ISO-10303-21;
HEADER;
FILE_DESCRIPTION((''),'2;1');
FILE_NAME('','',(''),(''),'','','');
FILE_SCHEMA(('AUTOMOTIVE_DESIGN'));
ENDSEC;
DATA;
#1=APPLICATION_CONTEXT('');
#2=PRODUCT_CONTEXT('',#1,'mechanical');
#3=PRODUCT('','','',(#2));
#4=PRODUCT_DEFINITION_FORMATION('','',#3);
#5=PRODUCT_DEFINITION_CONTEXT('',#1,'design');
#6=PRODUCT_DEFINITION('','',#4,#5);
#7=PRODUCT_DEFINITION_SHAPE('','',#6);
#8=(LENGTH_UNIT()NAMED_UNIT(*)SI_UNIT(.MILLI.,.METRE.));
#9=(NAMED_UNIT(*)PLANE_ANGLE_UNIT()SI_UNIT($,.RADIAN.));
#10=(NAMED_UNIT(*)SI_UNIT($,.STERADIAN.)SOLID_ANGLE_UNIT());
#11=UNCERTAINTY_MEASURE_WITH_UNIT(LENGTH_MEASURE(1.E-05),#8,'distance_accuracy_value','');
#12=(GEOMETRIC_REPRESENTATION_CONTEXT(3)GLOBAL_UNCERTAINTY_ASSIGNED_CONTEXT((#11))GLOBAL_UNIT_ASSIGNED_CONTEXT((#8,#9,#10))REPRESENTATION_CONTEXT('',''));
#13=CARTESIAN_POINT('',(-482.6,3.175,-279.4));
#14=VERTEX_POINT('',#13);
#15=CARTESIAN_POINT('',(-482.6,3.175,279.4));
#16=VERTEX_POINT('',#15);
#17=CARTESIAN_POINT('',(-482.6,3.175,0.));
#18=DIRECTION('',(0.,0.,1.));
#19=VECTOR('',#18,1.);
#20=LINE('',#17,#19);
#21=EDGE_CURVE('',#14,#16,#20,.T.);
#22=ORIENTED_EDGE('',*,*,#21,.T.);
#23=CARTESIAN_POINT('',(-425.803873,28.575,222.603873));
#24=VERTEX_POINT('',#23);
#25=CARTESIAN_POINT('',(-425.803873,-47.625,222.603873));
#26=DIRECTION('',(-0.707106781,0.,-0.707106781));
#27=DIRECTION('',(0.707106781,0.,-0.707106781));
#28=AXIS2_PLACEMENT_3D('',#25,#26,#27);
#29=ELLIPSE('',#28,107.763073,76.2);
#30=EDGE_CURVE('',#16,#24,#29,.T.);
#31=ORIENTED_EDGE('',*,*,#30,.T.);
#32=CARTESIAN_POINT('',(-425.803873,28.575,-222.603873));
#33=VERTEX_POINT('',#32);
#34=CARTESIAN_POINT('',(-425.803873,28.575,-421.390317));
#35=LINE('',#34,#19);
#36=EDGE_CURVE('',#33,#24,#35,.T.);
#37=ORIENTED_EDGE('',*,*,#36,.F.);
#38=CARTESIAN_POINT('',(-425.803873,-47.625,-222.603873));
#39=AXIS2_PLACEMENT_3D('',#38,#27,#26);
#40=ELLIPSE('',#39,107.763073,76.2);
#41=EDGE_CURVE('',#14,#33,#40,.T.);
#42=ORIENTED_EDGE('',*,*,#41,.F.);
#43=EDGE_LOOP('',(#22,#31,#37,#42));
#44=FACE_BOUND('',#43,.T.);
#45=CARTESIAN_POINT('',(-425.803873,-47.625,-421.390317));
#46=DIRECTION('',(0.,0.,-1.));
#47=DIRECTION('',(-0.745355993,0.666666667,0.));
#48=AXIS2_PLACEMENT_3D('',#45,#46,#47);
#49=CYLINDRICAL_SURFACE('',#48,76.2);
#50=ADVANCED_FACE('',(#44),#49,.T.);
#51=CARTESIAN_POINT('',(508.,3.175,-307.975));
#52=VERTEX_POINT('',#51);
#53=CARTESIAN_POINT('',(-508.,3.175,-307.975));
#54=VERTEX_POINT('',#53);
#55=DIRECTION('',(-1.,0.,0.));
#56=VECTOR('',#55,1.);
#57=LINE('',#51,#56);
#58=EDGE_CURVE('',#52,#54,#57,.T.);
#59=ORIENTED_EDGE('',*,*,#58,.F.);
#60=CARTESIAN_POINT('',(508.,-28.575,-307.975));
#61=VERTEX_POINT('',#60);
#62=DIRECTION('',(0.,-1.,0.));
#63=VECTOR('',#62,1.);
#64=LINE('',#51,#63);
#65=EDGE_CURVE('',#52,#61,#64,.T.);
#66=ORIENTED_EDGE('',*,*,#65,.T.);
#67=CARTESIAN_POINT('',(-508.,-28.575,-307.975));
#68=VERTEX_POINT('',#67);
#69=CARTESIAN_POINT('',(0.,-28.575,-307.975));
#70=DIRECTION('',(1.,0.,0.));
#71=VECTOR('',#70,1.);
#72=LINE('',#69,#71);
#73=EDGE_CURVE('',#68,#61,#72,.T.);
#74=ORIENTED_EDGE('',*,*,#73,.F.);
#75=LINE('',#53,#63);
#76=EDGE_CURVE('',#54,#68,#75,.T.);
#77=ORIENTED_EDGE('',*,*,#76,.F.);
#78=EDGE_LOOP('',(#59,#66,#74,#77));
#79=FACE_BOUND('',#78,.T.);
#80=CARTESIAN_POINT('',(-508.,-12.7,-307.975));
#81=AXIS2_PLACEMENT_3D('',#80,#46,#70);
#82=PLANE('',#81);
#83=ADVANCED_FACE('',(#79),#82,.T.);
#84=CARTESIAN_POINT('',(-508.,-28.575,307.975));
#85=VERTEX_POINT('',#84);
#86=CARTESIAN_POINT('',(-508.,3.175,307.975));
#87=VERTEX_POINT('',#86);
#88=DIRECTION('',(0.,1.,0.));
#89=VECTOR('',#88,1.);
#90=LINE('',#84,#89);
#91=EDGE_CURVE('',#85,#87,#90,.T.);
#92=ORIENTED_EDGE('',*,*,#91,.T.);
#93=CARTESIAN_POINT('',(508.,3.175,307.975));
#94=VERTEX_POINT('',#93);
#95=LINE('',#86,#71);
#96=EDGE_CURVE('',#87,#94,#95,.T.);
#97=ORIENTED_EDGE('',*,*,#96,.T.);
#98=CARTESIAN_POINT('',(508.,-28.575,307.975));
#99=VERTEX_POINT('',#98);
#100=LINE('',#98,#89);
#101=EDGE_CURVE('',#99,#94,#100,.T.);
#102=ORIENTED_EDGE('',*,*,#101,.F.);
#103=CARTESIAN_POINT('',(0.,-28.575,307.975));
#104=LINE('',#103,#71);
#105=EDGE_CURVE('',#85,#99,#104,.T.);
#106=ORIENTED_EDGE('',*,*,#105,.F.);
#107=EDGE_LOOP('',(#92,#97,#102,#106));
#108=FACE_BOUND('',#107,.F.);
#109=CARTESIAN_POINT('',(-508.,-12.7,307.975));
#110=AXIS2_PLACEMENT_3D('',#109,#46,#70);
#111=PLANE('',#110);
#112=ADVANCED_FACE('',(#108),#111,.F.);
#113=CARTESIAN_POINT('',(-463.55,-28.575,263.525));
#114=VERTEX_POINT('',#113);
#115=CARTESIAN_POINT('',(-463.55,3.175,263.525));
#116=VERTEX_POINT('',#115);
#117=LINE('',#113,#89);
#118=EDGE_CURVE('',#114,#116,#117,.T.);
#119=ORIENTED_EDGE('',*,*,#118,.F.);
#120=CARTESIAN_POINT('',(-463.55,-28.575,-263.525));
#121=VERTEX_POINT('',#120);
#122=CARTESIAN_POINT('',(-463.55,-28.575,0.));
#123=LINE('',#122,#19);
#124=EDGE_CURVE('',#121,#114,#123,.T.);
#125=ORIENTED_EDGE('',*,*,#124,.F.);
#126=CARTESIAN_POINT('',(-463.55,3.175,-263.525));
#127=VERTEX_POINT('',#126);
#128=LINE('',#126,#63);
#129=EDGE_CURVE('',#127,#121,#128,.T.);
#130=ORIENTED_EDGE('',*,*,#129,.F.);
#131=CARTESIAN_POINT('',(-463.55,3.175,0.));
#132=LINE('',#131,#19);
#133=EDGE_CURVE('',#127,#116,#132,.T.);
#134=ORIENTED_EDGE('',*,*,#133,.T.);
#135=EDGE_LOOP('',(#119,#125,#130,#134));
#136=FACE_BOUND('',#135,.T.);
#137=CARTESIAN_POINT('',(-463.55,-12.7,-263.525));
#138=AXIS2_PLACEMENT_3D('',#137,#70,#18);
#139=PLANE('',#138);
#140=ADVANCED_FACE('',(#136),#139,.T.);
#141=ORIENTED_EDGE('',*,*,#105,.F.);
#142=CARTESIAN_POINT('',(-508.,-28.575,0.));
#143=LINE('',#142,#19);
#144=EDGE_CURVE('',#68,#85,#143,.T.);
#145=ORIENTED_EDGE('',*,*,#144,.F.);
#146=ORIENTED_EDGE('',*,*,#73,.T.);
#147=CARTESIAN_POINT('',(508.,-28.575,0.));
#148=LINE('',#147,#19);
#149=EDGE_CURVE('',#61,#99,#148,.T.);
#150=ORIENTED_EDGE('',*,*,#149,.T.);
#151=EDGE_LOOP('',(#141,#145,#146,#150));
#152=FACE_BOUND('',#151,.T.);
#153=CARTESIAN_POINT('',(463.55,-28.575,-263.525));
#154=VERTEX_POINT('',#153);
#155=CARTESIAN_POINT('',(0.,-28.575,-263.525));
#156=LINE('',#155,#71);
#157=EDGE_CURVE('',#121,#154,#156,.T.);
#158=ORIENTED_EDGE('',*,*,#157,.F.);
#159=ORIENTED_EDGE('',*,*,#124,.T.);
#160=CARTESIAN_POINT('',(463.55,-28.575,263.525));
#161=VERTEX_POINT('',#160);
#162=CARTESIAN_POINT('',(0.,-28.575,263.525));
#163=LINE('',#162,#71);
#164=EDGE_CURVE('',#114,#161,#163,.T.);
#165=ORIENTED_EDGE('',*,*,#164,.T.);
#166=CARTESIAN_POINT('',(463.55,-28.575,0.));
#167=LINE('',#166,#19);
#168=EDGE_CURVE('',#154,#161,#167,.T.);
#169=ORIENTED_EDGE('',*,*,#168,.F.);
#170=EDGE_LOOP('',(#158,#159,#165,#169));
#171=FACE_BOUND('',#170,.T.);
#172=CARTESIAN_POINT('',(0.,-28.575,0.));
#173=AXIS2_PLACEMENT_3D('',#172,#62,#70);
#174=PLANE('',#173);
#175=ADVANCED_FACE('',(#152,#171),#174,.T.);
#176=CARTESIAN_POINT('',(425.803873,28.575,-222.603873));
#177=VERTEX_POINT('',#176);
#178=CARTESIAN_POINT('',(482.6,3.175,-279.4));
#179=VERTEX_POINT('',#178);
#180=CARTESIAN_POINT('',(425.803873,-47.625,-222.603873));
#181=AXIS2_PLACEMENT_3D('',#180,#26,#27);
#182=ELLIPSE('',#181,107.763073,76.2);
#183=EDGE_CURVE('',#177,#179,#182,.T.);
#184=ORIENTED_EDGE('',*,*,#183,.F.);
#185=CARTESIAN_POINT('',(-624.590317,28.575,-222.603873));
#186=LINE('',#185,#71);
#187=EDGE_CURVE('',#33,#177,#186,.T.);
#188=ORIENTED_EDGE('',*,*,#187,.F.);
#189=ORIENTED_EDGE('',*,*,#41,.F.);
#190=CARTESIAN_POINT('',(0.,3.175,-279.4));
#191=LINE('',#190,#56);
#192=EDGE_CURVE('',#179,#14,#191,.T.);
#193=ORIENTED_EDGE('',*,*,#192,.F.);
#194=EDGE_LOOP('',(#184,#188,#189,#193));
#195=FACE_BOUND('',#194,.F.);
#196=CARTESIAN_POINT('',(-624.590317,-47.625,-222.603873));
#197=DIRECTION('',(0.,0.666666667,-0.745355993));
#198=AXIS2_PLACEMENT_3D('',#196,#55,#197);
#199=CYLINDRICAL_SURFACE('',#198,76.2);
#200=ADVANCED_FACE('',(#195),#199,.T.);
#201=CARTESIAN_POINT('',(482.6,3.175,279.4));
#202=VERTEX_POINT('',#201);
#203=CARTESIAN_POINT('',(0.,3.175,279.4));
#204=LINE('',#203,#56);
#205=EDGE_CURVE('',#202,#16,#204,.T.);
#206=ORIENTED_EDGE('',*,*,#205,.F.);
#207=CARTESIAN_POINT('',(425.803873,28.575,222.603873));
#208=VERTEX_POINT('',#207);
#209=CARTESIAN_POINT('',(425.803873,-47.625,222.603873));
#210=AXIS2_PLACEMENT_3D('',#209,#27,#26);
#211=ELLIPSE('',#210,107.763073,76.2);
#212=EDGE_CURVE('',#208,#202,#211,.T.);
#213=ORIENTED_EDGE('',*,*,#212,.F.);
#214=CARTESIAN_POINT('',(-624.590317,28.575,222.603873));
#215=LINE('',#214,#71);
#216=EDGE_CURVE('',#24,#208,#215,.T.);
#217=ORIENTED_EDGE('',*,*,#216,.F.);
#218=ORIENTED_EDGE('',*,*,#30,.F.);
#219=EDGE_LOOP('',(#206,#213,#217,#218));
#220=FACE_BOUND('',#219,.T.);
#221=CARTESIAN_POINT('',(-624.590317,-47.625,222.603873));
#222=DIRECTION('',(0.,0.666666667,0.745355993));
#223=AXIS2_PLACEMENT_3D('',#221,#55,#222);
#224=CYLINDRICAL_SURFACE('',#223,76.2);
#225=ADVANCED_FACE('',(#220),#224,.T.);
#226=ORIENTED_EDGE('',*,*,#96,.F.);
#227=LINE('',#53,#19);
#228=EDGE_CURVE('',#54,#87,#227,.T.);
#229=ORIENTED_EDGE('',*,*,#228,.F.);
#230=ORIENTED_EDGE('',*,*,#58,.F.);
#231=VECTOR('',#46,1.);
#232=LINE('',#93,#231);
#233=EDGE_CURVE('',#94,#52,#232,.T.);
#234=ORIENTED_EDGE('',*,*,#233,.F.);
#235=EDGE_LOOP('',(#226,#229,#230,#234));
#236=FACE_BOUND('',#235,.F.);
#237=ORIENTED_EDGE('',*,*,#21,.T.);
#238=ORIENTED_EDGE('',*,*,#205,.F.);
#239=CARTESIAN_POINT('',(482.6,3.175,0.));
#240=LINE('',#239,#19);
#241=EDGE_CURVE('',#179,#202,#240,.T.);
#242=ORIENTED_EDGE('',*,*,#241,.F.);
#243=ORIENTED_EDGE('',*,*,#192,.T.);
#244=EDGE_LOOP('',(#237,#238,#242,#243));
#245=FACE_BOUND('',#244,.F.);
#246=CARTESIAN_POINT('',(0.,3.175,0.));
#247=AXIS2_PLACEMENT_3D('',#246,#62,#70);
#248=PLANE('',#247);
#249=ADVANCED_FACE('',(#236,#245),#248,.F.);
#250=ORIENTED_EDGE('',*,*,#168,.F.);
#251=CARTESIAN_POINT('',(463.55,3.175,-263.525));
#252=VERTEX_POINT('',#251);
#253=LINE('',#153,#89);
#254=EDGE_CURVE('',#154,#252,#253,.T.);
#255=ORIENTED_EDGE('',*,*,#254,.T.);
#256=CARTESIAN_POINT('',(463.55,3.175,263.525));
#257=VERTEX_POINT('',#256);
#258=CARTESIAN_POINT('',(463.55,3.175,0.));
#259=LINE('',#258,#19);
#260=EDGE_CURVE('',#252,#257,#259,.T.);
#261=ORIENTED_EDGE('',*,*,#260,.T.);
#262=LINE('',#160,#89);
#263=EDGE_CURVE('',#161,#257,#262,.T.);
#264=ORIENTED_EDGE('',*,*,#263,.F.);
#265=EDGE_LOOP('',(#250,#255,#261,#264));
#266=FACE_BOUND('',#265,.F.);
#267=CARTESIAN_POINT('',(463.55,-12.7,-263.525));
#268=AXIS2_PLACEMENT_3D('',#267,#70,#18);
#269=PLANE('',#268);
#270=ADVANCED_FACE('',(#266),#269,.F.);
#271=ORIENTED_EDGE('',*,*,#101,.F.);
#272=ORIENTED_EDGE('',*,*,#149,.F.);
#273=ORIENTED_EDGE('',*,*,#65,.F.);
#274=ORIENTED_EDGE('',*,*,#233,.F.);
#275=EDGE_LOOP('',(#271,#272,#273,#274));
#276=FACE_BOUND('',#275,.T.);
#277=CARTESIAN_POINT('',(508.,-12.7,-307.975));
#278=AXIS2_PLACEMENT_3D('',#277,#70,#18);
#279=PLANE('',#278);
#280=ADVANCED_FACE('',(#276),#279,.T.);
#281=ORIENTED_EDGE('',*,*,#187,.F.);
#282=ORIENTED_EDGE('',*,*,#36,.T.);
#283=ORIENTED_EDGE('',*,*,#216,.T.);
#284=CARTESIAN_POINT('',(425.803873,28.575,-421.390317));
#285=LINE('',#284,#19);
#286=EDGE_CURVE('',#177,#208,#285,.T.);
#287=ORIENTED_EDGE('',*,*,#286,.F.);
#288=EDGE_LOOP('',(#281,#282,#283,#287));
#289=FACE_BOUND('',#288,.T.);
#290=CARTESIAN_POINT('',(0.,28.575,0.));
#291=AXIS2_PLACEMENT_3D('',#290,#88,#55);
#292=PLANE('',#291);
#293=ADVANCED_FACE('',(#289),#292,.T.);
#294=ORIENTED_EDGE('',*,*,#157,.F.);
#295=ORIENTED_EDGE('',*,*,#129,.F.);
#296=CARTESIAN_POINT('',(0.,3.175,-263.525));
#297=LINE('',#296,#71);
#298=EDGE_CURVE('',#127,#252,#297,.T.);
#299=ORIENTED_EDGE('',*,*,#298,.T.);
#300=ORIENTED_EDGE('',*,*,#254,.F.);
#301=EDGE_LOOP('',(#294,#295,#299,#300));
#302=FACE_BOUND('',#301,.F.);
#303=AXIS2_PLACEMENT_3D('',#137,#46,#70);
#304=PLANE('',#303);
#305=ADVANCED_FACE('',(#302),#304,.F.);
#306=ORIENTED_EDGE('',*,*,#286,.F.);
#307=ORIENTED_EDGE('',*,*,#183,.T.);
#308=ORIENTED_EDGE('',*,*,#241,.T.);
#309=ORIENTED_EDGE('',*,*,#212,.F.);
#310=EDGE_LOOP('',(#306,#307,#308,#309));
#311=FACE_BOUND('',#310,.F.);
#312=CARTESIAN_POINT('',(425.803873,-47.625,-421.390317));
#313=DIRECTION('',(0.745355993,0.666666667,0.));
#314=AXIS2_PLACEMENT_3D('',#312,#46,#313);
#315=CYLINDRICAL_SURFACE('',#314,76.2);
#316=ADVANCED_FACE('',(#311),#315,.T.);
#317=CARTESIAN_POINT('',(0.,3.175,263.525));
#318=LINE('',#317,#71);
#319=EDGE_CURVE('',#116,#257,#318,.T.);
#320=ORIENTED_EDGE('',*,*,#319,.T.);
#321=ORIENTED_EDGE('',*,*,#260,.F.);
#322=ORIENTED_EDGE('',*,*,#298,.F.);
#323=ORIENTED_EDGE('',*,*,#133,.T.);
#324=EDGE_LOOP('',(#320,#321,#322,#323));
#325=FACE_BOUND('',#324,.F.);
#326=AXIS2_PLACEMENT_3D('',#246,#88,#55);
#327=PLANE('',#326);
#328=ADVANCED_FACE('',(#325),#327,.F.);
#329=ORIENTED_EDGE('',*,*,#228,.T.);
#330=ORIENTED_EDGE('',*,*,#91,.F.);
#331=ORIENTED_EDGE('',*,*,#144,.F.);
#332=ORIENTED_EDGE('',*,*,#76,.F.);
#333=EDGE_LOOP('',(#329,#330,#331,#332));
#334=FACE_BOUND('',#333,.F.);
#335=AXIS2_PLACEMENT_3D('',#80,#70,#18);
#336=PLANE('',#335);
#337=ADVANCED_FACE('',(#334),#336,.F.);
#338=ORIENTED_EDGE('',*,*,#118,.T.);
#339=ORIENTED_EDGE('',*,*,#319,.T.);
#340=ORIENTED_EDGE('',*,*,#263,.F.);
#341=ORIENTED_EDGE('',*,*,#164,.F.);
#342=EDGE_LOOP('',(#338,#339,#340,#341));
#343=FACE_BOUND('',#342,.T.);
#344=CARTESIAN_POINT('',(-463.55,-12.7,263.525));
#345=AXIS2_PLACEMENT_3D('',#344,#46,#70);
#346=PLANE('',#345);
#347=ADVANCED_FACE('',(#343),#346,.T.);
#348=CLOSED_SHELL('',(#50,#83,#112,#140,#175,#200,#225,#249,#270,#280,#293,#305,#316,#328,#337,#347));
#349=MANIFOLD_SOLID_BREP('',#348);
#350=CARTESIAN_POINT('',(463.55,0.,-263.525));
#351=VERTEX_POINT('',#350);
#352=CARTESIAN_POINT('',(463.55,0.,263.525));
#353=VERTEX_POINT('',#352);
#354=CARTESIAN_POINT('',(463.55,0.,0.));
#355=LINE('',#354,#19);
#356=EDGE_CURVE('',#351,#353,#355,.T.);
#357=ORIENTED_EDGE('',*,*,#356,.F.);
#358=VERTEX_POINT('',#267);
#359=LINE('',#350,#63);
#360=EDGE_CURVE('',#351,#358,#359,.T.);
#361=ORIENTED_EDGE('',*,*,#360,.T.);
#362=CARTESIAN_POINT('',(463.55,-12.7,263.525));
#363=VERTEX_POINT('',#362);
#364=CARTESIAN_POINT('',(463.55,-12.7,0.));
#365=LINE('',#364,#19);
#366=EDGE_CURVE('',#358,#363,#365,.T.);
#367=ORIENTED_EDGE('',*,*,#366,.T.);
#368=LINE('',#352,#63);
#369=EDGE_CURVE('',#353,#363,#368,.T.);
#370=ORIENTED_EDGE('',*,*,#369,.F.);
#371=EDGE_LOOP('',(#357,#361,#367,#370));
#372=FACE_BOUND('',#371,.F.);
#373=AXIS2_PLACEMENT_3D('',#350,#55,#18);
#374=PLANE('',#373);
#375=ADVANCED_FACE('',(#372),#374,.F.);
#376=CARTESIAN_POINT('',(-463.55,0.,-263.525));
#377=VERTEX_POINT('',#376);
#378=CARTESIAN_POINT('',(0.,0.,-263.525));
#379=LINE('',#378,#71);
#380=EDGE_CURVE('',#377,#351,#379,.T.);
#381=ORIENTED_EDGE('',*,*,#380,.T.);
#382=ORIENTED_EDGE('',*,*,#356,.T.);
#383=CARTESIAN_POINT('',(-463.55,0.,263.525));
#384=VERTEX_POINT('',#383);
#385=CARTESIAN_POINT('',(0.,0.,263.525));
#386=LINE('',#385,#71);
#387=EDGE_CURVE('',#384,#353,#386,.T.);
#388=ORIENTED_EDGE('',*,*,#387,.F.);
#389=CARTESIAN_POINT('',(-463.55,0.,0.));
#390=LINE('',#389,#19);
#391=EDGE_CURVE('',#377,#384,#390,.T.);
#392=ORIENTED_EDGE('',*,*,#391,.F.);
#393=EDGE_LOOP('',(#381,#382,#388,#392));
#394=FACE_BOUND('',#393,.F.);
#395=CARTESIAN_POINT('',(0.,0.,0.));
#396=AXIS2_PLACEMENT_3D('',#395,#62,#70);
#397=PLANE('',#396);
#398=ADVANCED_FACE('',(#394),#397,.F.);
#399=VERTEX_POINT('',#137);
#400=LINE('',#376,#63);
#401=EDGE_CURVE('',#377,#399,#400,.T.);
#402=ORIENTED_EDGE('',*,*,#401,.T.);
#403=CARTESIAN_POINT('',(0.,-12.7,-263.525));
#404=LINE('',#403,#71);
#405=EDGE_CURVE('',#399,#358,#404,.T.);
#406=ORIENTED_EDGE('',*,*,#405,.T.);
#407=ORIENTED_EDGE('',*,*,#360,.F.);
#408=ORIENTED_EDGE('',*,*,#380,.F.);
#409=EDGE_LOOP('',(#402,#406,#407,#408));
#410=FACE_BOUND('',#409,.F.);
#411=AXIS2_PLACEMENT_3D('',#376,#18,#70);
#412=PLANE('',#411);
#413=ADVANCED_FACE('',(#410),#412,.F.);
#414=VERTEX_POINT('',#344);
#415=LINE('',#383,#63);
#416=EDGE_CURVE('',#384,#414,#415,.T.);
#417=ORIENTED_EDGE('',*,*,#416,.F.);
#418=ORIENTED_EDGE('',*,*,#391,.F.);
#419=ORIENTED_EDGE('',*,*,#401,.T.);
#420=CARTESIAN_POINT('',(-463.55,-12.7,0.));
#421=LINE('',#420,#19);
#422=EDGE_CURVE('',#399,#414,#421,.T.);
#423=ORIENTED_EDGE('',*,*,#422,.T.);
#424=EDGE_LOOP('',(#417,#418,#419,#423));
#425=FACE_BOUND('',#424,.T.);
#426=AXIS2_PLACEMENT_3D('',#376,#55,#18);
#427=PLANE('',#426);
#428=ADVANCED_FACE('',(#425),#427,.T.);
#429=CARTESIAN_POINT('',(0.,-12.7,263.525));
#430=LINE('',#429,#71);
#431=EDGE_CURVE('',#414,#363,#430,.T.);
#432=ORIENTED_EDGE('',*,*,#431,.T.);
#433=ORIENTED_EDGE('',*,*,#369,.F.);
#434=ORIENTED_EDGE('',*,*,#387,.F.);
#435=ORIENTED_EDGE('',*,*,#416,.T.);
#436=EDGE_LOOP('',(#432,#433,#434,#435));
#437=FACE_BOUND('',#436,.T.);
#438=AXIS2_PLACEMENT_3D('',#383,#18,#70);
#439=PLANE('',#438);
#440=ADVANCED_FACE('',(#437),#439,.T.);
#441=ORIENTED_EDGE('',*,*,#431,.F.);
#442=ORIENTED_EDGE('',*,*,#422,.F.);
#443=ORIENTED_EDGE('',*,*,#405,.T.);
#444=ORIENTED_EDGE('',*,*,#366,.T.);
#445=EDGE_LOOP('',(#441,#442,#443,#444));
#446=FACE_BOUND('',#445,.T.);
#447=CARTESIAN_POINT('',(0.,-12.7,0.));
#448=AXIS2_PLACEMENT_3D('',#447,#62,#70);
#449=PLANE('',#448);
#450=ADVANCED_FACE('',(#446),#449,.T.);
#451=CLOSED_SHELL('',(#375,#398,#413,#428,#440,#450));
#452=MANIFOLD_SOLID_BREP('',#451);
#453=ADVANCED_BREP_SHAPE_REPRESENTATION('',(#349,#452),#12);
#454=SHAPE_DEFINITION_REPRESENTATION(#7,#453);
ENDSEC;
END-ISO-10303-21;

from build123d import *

# Parameters (mm, degrees)
F0_W        = 927.1
F0_H        = 527.05
F1_DEPTH    = 12.7
F2_W        = 1016
F2_H        = 615.95
F2_W_2      = 927.1
F2_H_2      = 527.05
F3_DEPTH    = 15.875
F4_W        = 965.2
F4_H        = 558.8
F5_DEPTH    = 25.4
F6_T1_DEPTH = 842.7806331425
F6_T3_DEPTH = 1249.1806331425


# Not quite as in the source:
# - a fillet or chamfer that OpenCascade refuses, or shapes differently, is made with other operations: its cross-section is extruded or revolved along the edge and cut away or added


with BuildPart() as f1:
    # F0 (on Front) → F1 (new body)
    with BuildSketch(Plane.XZ):
        Rectangle(F0_W, F0_H)
    extrude(amount=F1_DEPTH)


with BuildPart() as f3:
    # F2 (on face) → F3 (new body, symmetric)
    with BuildSketch(Plane.XZ.offset(12.7)):
        Rectangle(F2_W, F2_H)
        Rectangle(F2_W_2, F2_H_2, mode=Mode.SUBTRACT)
    extrude(amount=F3_DEPTH, both=True)

    # F4 (on face) → F5 (join)
    with BuildSketch(Plane(origin=(0, 3.175, 0), x_dir=(-1, 0, 0), z_dir=(0, 1, 0))):
        Rectangle(F4_W, F4_H)
    extrude(amount=F5_DEPTH)

    # F6: fillet of radius 76.2 on 4 edges, made by hand

    # F6_s2 → F6_t1 (cut)
    with BuildSketch(Plane.XY.offset(-421.3903165712)):
        with BuildLine():
            ThreePointArc((482.6, 3.175), (456.9123931049, 21.9357648032), (425.8038733715, 28.575))
            Line((425.8038733715, 28.575), (425.8038733715, 30.099))
            Line((425.8038733715, 30.099), (482.6, 30.099))
            Line((482.6, 30.099), (484.124, 28.575))
            ThreePointArc((484.124, 28.575), (484.124, 15.875), (483.7359225326, 4.191))
            Line((483.7359225326, 4.191), (482.6, 3.175))
        make_face()
        with BuildLine():
            ThreePointArc((-482.6, 3.175), (-456.9123931049, 21.9357648032), (-425.8038733715, 28.575))
            Line((-425.8038733715, 28.575), (-425.8038733715, 30.099))
            Line((-425.8038733715, 30.099), (-482.6, 30.099))
            Line((-482.6, 30.099), (-484.124, 28.575))
            ThreePointArc((-484.124, 28.575), (-484.124, 15.875), (-483.7359225326, 4.191))
            Line((-483.7359225326, 4.191), (-482.6, 3.175))
        make_face()
    extrude(amount=F6_T1_DEPTH, mode=Mode.SUBTRACT)

    # F6_s4 → F6_t3 (cut)
    with BuildSketch(Plane.YZ.offset(-624.5903165712)):
        with BuildLine():
            ThreePointArc((3.175, 279.4), (21.9357648032, 253.7123931049), (28.575, 222.6038733715))
            Line((28.575, 222.6038733715), (30.099, 222.6038733715))
            Line((30.099, 222.6038733715), (30.099, 279.4))
            Line((30.099, 279.4), (28.575, 280.924))
            ThreePointArc((28.575, 280.924), (15.875, 280.924), (4.191, 280.5359225326))
            Line((4.191, 280.5359225326), (3.175, 279.4))
        make_face()
        with BuildLine():
            ThreePointArc((3.175, -279.4), (21.9357648032, -253.7123931049), (28.575, -222.6038733715))
            Line((28.575, -222.6038733715), (30.099, -222.6038733715))
            Line((30.099, -222.6038733715), (30.099, -279.4))
            Line((30.099, -279.4), (28.575, -280.924))
            ThreePointArc((28.575, -280.924), (15.875, -280.924), (4.191, -280.5359225326))
            Line((4.191, -280.5359225326), (3.175, -279.4))
        make_face()
    extrude(amount=F6_T3_DEPTH, mode=Mode.SUBTRACT)


solid = Compound([f1.part, f3.part])
